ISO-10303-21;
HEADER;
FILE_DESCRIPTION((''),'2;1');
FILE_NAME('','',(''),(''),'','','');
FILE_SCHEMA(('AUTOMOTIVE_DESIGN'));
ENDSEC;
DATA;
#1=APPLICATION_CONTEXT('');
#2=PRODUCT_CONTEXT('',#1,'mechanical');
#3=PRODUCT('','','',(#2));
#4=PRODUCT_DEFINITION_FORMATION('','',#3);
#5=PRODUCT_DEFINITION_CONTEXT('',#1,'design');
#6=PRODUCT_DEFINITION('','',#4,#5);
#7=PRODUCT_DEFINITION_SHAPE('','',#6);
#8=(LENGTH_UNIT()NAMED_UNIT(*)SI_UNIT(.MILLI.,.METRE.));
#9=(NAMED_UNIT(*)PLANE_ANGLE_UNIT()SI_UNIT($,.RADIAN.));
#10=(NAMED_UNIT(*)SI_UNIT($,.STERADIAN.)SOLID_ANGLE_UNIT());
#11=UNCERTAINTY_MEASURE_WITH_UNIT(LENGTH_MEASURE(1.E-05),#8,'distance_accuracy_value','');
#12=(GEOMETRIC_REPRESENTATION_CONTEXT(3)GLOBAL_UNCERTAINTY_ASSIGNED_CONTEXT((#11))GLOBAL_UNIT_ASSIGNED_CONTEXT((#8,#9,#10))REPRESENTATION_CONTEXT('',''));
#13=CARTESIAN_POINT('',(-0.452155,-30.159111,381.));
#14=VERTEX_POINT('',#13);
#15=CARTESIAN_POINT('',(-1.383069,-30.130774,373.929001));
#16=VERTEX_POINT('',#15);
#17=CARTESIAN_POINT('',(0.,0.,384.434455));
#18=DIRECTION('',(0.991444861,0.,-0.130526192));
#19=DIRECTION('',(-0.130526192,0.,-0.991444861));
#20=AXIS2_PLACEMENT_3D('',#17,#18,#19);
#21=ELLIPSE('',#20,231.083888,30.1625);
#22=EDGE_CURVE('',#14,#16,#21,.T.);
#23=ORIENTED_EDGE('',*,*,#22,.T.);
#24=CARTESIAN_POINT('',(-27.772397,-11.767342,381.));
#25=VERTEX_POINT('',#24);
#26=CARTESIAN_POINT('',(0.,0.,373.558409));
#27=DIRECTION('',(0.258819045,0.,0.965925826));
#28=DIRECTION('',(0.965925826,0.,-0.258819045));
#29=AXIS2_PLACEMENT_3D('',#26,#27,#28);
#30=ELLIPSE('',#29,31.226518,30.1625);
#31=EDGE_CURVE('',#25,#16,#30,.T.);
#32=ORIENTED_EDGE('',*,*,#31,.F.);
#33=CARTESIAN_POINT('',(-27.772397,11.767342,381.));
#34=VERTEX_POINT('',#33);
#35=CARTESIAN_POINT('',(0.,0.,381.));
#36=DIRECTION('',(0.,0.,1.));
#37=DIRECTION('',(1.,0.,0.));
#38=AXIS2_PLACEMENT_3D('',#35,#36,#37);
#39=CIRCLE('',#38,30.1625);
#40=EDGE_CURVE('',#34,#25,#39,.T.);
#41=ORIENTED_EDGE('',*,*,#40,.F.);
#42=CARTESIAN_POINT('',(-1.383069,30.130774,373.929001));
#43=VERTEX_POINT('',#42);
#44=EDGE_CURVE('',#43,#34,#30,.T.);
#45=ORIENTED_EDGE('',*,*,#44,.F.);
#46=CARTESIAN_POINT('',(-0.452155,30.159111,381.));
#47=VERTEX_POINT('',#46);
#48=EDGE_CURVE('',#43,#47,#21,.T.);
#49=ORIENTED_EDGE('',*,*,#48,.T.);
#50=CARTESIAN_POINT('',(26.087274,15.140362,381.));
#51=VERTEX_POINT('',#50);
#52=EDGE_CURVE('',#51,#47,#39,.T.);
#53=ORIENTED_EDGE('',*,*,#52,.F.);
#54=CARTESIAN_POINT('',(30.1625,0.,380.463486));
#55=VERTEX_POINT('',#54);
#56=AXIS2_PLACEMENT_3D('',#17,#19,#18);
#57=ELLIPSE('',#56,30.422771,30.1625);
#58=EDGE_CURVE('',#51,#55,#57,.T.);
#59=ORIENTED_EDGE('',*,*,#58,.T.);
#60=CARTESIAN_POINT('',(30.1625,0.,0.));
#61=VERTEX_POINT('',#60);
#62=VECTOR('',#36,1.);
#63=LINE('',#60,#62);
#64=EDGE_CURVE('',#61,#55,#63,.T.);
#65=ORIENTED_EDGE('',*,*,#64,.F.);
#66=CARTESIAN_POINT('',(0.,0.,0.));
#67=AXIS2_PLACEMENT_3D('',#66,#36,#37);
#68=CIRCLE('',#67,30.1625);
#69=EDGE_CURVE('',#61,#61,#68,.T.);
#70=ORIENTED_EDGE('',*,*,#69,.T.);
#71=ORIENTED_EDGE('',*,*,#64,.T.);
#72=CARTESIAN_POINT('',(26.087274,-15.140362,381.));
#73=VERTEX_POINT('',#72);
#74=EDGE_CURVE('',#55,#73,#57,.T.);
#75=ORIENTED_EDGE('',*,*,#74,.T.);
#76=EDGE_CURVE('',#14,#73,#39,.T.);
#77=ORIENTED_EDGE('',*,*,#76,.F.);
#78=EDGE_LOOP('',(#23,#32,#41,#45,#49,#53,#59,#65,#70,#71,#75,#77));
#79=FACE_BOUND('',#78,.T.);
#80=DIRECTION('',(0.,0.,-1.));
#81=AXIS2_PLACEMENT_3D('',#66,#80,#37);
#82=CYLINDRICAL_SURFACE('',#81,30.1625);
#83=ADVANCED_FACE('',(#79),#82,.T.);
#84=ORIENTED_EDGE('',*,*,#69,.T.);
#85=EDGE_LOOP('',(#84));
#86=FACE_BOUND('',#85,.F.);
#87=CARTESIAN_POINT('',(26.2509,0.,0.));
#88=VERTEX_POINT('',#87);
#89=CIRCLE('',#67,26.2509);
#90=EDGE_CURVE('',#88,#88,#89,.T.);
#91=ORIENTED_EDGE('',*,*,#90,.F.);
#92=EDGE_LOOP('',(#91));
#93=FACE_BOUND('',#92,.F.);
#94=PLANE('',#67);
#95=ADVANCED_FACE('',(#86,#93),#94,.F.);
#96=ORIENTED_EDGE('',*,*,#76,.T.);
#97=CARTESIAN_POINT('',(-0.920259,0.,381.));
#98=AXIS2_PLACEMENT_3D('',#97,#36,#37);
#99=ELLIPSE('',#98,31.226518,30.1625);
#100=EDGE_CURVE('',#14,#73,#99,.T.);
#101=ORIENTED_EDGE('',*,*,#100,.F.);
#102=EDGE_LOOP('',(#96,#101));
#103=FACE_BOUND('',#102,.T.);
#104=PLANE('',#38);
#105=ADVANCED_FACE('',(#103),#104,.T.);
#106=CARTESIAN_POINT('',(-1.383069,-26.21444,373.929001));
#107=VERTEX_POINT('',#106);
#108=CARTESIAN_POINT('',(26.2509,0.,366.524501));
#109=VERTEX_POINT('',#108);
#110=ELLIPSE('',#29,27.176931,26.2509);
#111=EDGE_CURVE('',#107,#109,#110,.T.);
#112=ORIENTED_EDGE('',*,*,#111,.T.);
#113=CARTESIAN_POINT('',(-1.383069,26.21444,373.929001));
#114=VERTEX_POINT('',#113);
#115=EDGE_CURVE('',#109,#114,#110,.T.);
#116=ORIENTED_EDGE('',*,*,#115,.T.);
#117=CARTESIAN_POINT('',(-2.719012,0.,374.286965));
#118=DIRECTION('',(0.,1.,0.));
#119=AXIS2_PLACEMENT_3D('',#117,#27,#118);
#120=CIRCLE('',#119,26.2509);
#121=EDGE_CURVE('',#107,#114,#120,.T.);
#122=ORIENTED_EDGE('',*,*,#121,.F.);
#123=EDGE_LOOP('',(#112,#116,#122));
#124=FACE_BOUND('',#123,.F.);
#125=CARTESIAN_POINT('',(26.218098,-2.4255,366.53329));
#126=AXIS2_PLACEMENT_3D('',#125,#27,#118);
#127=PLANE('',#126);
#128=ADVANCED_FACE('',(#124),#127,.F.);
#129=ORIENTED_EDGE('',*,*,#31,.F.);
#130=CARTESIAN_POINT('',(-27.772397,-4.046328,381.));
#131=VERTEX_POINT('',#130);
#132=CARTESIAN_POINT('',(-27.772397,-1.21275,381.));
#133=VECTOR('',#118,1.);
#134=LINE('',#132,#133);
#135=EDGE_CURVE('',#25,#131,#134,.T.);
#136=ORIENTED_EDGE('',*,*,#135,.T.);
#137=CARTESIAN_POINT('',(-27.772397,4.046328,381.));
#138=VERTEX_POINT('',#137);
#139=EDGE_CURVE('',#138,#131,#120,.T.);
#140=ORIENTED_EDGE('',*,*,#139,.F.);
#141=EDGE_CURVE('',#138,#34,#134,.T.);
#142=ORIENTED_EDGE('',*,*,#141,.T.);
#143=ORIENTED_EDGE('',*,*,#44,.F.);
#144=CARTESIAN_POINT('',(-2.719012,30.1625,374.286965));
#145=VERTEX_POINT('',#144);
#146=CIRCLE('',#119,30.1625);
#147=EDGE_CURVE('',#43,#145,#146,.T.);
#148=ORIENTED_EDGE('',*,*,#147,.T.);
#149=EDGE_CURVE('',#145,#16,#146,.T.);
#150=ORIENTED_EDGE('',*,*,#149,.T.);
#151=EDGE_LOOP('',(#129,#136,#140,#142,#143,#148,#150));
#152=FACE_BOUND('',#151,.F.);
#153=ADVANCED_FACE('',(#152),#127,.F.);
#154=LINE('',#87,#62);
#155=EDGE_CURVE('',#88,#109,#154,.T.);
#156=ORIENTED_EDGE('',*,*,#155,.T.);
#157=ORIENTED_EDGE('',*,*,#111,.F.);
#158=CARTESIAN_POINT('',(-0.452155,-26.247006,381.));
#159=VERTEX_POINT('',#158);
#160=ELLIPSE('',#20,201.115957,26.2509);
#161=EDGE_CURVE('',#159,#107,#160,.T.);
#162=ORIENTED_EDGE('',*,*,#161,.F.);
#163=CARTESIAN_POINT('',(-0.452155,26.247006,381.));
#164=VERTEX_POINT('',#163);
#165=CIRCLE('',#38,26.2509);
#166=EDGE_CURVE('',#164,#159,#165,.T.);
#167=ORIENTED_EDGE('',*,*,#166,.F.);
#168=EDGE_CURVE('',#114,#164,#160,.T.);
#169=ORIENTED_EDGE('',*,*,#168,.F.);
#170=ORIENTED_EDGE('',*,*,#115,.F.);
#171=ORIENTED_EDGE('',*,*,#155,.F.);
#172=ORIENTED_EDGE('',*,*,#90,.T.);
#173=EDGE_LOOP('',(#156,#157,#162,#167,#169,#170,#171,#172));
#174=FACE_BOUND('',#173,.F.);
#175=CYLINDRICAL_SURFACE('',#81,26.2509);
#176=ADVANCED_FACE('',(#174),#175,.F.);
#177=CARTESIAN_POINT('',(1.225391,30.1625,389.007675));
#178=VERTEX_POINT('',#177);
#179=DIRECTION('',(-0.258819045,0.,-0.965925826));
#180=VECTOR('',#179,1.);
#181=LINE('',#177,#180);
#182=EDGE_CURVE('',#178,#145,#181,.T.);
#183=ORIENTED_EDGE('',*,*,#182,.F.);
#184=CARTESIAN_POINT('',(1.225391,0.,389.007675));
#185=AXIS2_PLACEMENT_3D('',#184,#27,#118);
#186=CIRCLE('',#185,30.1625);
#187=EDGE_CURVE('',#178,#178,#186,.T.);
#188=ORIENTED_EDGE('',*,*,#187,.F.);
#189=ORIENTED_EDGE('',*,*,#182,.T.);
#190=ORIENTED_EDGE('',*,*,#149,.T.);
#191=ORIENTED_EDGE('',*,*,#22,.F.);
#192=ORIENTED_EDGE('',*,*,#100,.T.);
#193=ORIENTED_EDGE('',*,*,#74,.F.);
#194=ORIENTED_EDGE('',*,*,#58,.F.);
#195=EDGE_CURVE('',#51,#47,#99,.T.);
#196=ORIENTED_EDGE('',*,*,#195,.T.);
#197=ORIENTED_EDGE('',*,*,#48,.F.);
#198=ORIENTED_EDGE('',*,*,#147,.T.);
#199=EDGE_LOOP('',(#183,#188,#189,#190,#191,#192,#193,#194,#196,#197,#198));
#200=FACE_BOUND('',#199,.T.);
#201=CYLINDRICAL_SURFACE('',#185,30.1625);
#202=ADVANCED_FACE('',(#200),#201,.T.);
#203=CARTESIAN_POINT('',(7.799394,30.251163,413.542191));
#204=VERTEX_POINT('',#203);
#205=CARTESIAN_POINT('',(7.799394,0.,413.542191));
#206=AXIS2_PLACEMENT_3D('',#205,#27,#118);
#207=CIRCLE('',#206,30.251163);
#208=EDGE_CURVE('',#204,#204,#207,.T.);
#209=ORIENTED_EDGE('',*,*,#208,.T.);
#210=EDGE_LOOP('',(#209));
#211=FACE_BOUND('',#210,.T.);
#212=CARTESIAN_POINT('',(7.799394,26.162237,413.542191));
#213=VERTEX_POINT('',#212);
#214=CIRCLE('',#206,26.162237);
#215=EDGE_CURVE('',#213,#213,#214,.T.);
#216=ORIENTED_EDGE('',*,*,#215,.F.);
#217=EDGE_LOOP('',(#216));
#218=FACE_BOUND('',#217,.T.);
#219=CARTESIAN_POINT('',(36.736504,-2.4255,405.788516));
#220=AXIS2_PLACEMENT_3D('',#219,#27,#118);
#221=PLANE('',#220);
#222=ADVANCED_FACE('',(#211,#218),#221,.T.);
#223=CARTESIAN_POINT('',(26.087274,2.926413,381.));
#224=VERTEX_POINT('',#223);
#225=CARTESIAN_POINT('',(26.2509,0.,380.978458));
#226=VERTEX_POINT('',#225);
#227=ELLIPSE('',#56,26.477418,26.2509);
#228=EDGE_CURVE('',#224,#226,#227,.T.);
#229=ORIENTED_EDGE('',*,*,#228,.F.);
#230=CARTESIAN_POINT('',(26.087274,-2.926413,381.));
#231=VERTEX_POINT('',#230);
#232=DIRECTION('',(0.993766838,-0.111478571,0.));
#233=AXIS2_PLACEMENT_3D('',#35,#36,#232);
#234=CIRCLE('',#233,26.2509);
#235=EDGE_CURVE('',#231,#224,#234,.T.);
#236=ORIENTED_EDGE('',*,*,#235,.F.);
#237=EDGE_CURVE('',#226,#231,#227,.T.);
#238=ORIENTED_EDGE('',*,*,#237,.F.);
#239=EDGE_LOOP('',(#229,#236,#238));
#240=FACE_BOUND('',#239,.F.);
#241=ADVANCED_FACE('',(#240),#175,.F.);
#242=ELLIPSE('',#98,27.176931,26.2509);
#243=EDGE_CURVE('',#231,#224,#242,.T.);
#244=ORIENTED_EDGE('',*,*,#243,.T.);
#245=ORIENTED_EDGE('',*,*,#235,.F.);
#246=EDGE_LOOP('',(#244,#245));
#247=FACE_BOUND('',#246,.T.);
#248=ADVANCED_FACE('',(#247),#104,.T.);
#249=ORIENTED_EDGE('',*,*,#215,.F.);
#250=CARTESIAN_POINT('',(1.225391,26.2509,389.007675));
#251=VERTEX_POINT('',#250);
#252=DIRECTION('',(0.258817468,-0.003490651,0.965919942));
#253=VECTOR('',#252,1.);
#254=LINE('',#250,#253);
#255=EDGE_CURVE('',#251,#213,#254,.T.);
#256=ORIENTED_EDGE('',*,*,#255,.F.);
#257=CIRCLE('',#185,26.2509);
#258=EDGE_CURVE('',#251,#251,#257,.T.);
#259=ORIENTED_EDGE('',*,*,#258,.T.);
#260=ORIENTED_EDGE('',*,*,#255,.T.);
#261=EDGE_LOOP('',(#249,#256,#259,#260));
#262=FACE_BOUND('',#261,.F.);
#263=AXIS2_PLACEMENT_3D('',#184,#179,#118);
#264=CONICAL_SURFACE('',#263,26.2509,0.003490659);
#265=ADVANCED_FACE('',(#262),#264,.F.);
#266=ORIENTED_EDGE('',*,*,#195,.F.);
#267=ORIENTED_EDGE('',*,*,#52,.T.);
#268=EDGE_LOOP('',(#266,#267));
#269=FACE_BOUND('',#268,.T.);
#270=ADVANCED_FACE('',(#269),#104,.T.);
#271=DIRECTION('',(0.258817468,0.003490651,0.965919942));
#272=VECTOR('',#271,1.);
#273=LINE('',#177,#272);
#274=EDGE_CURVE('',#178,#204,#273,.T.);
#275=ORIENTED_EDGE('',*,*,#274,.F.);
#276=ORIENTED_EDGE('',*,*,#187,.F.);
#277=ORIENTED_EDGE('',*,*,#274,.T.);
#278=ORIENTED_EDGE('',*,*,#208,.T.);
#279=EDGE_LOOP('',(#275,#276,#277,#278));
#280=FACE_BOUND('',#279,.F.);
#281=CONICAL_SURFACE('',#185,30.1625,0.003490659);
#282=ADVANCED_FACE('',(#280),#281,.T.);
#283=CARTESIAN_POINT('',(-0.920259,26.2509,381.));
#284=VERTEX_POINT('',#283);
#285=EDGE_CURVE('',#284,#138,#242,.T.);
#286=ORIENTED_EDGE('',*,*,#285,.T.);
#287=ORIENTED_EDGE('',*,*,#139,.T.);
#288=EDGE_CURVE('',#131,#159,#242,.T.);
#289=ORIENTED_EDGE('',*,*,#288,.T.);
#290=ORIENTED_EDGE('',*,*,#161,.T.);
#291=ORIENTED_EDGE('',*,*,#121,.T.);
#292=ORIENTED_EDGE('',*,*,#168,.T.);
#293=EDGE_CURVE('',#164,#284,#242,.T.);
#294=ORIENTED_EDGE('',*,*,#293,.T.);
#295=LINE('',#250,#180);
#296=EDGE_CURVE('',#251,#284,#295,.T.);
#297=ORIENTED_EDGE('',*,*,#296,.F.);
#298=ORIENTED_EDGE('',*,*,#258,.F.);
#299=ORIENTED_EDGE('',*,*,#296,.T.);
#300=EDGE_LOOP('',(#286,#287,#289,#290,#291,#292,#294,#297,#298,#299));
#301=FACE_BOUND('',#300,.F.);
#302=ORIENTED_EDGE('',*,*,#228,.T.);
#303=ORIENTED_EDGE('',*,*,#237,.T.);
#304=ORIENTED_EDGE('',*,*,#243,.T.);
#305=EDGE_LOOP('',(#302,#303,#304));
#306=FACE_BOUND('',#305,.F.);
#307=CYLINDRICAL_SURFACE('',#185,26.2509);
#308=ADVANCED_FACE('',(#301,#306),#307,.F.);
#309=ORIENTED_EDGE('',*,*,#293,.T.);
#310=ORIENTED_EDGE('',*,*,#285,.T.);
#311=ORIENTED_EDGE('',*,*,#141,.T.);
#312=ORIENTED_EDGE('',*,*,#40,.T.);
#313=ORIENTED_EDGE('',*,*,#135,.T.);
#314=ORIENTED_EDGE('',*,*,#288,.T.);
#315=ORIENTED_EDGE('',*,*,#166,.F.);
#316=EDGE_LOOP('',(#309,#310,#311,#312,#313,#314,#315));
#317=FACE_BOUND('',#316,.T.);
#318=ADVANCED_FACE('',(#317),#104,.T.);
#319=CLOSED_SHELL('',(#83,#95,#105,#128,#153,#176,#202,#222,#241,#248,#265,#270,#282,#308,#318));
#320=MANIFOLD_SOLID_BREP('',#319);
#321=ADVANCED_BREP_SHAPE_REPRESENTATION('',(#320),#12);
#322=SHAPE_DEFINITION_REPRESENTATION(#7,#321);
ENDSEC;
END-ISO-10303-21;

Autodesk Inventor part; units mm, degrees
ref_plane "YZ Plane" through (0, 0, 0) normal (1, 0, 0) x (0, 1, 0)
ref_plane "XZ Plane" through (0, 0, 0) normal (0, 1, 0) x (-1, 0, 0)
sketch "Sketch1" plane through (0, 0, 0) normal (0, 0, 1) x (1, 0, 0)
  circle A0 centre (0, 0) radius 30.1625
  circle A1 centre (0, 0) radius 26.2509
  dimension "d0" = 60.325
  dimension "d2" = 3.9116
extrude "Extrusion1" add sketch "Sketch1" along normal blind 381
sketch "Sketch16" plane through (0, 0, 381) normal (0, 0, 1) x (1, 0, 0)
  circle A0 centre (0, 0) radius 30.1625 projected
  line L0 (27.5395, -2.4255) -> (30.1625, -2.4255)
  line L1 (30.1625, -2.4255) -> (30.1625, 0)
  line L2 (30.1625, 0) -> (27.5395, 0)
  line L3 (27.5395, 0) -> (27.5395, -2.4255)
extrude "Extrusion9" add sketch "Sketch16" along normal blind 0.254 contours L1 L0 A0 | A0 L0 L3 L2 picked at (28.3994, -1.3478)
ref_plane "Work Plane7" through (30.1625, -2.4255, 381.254) normal (0.258819, 0, 0.9659258) x (0, 1, 0)
sketch "Sketch17" plane through (30.1625, -2.4255, 381.254) normal (0.258819, 0, 0.9659258) x (0, 1, 0)
  circle A0 centre (2.4255, 29.9579) radius 30.1625
  circle A1 centre (2.4255, 29.9579) radius 26.2509
  point P0 (2.4255, -69.5411)
  dimension "d54" = 60.325
  dimension "d55" = 3.9116
extrude "Extrusion10" add sketch "Sketch17" along normal blind 25.4 draft 0.2 and the other way blind 15.24
properties part number "2r2scs" material "PVC-Piping"
